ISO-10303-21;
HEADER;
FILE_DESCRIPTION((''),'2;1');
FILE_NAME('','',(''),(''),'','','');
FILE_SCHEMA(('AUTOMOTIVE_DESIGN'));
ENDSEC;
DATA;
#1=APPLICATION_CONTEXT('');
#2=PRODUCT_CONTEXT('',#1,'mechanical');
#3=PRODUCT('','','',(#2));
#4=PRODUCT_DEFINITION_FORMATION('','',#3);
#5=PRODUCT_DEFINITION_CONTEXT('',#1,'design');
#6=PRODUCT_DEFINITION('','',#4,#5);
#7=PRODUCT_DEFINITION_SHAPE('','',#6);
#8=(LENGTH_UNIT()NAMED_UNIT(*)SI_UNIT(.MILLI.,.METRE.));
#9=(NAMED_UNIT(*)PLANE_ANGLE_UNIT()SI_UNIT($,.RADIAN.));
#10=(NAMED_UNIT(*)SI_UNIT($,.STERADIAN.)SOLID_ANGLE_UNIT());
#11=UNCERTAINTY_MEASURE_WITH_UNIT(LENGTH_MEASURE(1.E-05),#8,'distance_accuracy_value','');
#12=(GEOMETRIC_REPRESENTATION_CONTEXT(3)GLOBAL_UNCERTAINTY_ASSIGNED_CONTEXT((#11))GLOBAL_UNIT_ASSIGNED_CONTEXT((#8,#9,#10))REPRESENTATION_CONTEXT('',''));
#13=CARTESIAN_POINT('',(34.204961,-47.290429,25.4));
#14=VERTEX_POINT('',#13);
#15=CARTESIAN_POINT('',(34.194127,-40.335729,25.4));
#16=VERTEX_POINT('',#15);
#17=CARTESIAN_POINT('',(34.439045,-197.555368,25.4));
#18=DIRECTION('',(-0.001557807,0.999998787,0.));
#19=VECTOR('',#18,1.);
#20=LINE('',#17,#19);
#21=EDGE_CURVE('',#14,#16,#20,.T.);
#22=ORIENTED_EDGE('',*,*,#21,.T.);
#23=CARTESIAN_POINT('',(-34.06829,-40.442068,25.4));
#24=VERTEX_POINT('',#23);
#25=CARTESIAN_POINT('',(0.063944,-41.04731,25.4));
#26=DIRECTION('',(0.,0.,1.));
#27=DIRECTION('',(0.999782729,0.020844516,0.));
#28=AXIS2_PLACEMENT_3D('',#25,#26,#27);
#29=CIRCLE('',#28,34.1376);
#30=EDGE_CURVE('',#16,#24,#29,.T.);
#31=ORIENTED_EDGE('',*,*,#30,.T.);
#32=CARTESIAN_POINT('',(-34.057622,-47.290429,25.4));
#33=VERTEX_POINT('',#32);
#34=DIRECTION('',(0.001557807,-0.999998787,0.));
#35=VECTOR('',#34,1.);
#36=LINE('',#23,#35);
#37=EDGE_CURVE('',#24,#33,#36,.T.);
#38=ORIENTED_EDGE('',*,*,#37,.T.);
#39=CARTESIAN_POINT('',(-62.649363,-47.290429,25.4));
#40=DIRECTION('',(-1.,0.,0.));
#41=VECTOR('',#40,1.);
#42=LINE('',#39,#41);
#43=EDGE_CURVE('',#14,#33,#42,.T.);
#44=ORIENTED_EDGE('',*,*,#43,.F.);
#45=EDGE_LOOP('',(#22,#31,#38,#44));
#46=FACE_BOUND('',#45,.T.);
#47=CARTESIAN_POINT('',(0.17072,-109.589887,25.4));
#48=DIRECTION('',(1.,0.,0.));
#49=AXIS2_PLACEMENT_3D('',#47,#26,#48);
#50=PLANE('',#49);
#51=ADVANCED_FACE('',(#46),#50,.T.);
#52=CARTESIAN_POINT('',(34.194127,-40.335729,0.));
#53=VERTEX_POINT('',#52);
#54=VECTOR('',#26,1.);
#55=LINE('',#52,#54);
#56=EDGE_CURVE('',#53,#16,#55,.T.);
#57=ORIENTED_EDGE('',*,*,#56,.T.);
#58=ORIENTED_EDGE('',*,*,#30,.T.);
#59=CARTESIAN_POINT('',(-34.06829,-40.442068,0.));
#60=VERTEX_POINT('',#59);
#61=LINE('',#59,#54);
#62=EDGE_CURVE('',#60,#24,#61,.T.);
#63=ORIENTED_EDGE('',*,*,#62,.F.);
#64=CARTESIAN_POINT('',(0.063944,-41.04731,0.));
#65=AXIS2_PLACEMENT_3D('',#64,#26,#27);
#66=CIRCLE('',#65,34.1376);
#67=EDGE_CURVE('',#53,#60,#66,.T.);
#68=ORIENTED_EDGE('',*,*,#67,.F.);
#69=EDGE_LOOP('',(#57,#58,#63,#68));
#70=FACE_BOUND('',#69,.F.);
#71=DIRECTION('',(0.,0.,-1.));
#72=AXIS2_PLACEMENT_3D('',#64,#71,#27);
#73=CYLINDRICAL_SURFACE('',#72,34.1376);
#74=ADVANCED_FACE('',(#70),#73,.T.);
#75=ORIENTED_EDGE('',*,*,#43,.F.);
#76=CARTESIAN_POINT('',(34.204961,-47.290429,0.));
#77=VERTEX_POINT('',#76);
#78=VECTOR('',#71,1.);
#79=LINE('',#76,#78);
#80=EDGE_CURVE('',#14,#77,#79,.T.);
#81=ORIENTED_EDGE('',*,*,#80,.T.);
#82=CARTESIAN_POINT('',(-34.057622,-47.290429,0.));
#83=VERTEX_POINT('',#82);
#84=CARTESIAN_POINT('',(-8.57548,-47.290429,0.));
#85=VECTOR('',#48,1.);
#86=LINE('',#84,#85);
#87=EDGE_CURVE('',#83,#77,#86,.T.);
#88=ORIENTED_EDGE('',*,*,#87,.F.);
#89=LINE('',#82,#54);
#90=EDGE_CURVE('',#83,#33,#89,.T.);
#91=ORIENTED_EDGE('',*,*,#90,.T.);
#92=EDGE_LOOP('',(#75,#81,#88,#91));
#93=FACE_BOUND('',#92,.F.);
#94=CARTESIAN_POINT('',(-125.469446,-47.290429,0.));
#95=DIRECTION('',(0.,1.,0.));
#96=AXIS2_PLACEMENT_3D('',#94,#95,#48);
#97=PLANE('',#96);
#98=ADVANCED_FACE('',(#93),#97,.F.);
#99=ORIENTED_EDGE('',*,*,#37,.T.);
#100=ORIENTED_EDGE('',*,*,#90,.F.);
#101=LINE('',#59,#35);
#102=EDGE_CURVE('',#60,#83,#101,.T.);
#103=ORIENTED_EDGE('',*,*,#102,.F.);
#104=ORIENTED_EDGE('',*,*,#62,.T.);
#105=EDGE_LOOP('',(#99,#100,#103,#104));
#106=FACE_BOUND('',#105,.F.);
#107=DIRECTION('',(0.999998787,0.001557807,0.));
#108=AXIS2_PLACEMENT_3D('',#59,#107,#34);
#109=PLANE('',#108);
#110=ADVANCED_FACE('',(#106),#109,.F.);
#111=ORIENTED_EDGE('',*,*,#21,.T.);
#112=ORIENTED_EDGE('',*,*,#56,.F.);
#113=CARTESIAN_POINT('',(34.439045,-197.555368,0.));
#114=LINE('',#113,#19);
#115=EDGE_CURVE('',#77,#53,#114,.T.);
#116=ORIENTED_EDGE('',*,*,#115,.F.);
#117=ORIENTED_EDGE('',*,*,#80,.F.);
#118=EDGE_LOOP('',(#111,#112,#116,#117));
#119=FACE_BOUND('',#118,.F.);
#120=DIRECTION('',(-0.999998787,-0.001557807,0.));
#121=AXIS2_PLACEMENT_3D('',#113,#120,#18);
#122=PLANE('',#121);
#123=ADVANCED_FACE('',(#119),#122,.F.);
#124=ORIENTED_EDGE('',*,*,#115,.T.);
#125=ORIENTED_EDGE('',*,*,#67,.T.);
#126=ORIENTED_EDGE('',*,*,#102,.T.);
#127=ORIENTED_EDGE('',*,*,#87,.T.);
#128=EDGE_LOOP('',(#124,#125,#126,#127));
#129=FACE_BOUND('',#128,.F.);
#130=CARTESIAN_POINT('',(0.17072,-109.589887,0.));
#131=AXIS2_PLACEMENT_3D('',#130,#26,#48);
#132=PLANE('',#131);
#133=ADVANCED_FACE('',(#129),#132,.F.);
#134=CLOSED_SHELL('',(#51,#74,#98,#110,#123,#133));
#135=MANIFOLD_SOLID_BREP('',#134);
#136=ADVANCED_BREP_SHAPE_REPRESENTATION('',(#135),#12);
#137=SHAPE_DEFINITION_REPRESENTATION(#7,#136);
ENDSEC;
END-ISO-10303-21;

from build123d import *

# Parameters (mm, degrees)
F1_DEPTH = 25.4
F2_W     = 233.7879315019
F2_H     = 188.8666450977
F3_DEPTH = 91.948


# Not quite as in the source:
# - a feature names something its author has since deleted; it is built from what else it names


with BuildPart() as f1:
    # F0 (on Top) → F1 (new body)
    with BuildSketch(Plane.XY):
        with BuildLine():
            ThreePointArc((34.1941267741, -40.3357285894), (0.0107640733, -6.90975175), (-34.0682903974, -40.4420683952))
            Line((-34.0682903974, -40.4420683952), (-33.8233722324, -197.6617082131))
            Line((-33.8233722324, -197.6617082131), (34.4390449391, -197.5553684074))
            Line((34.4390449391, -197.5553684074), (34.1941267741, -40.3357285894))
        make_face()
    extrude(amount=F1_DEPTH)

    # F2 (on face) → F3 (cut)
    with BuildSketch(Plane(origin=(0, 0, 0), x_dir=(1, 0, 0), z_dir=(0, 0, -1))):
        with Locations((-8.5754804313, 141.7237520218)):
            Rectangle(F2_W, F2_H)
    extrude(amount=-F3_DEPTH, mode=Mode.SUBTRACT)


solid = f1.part
